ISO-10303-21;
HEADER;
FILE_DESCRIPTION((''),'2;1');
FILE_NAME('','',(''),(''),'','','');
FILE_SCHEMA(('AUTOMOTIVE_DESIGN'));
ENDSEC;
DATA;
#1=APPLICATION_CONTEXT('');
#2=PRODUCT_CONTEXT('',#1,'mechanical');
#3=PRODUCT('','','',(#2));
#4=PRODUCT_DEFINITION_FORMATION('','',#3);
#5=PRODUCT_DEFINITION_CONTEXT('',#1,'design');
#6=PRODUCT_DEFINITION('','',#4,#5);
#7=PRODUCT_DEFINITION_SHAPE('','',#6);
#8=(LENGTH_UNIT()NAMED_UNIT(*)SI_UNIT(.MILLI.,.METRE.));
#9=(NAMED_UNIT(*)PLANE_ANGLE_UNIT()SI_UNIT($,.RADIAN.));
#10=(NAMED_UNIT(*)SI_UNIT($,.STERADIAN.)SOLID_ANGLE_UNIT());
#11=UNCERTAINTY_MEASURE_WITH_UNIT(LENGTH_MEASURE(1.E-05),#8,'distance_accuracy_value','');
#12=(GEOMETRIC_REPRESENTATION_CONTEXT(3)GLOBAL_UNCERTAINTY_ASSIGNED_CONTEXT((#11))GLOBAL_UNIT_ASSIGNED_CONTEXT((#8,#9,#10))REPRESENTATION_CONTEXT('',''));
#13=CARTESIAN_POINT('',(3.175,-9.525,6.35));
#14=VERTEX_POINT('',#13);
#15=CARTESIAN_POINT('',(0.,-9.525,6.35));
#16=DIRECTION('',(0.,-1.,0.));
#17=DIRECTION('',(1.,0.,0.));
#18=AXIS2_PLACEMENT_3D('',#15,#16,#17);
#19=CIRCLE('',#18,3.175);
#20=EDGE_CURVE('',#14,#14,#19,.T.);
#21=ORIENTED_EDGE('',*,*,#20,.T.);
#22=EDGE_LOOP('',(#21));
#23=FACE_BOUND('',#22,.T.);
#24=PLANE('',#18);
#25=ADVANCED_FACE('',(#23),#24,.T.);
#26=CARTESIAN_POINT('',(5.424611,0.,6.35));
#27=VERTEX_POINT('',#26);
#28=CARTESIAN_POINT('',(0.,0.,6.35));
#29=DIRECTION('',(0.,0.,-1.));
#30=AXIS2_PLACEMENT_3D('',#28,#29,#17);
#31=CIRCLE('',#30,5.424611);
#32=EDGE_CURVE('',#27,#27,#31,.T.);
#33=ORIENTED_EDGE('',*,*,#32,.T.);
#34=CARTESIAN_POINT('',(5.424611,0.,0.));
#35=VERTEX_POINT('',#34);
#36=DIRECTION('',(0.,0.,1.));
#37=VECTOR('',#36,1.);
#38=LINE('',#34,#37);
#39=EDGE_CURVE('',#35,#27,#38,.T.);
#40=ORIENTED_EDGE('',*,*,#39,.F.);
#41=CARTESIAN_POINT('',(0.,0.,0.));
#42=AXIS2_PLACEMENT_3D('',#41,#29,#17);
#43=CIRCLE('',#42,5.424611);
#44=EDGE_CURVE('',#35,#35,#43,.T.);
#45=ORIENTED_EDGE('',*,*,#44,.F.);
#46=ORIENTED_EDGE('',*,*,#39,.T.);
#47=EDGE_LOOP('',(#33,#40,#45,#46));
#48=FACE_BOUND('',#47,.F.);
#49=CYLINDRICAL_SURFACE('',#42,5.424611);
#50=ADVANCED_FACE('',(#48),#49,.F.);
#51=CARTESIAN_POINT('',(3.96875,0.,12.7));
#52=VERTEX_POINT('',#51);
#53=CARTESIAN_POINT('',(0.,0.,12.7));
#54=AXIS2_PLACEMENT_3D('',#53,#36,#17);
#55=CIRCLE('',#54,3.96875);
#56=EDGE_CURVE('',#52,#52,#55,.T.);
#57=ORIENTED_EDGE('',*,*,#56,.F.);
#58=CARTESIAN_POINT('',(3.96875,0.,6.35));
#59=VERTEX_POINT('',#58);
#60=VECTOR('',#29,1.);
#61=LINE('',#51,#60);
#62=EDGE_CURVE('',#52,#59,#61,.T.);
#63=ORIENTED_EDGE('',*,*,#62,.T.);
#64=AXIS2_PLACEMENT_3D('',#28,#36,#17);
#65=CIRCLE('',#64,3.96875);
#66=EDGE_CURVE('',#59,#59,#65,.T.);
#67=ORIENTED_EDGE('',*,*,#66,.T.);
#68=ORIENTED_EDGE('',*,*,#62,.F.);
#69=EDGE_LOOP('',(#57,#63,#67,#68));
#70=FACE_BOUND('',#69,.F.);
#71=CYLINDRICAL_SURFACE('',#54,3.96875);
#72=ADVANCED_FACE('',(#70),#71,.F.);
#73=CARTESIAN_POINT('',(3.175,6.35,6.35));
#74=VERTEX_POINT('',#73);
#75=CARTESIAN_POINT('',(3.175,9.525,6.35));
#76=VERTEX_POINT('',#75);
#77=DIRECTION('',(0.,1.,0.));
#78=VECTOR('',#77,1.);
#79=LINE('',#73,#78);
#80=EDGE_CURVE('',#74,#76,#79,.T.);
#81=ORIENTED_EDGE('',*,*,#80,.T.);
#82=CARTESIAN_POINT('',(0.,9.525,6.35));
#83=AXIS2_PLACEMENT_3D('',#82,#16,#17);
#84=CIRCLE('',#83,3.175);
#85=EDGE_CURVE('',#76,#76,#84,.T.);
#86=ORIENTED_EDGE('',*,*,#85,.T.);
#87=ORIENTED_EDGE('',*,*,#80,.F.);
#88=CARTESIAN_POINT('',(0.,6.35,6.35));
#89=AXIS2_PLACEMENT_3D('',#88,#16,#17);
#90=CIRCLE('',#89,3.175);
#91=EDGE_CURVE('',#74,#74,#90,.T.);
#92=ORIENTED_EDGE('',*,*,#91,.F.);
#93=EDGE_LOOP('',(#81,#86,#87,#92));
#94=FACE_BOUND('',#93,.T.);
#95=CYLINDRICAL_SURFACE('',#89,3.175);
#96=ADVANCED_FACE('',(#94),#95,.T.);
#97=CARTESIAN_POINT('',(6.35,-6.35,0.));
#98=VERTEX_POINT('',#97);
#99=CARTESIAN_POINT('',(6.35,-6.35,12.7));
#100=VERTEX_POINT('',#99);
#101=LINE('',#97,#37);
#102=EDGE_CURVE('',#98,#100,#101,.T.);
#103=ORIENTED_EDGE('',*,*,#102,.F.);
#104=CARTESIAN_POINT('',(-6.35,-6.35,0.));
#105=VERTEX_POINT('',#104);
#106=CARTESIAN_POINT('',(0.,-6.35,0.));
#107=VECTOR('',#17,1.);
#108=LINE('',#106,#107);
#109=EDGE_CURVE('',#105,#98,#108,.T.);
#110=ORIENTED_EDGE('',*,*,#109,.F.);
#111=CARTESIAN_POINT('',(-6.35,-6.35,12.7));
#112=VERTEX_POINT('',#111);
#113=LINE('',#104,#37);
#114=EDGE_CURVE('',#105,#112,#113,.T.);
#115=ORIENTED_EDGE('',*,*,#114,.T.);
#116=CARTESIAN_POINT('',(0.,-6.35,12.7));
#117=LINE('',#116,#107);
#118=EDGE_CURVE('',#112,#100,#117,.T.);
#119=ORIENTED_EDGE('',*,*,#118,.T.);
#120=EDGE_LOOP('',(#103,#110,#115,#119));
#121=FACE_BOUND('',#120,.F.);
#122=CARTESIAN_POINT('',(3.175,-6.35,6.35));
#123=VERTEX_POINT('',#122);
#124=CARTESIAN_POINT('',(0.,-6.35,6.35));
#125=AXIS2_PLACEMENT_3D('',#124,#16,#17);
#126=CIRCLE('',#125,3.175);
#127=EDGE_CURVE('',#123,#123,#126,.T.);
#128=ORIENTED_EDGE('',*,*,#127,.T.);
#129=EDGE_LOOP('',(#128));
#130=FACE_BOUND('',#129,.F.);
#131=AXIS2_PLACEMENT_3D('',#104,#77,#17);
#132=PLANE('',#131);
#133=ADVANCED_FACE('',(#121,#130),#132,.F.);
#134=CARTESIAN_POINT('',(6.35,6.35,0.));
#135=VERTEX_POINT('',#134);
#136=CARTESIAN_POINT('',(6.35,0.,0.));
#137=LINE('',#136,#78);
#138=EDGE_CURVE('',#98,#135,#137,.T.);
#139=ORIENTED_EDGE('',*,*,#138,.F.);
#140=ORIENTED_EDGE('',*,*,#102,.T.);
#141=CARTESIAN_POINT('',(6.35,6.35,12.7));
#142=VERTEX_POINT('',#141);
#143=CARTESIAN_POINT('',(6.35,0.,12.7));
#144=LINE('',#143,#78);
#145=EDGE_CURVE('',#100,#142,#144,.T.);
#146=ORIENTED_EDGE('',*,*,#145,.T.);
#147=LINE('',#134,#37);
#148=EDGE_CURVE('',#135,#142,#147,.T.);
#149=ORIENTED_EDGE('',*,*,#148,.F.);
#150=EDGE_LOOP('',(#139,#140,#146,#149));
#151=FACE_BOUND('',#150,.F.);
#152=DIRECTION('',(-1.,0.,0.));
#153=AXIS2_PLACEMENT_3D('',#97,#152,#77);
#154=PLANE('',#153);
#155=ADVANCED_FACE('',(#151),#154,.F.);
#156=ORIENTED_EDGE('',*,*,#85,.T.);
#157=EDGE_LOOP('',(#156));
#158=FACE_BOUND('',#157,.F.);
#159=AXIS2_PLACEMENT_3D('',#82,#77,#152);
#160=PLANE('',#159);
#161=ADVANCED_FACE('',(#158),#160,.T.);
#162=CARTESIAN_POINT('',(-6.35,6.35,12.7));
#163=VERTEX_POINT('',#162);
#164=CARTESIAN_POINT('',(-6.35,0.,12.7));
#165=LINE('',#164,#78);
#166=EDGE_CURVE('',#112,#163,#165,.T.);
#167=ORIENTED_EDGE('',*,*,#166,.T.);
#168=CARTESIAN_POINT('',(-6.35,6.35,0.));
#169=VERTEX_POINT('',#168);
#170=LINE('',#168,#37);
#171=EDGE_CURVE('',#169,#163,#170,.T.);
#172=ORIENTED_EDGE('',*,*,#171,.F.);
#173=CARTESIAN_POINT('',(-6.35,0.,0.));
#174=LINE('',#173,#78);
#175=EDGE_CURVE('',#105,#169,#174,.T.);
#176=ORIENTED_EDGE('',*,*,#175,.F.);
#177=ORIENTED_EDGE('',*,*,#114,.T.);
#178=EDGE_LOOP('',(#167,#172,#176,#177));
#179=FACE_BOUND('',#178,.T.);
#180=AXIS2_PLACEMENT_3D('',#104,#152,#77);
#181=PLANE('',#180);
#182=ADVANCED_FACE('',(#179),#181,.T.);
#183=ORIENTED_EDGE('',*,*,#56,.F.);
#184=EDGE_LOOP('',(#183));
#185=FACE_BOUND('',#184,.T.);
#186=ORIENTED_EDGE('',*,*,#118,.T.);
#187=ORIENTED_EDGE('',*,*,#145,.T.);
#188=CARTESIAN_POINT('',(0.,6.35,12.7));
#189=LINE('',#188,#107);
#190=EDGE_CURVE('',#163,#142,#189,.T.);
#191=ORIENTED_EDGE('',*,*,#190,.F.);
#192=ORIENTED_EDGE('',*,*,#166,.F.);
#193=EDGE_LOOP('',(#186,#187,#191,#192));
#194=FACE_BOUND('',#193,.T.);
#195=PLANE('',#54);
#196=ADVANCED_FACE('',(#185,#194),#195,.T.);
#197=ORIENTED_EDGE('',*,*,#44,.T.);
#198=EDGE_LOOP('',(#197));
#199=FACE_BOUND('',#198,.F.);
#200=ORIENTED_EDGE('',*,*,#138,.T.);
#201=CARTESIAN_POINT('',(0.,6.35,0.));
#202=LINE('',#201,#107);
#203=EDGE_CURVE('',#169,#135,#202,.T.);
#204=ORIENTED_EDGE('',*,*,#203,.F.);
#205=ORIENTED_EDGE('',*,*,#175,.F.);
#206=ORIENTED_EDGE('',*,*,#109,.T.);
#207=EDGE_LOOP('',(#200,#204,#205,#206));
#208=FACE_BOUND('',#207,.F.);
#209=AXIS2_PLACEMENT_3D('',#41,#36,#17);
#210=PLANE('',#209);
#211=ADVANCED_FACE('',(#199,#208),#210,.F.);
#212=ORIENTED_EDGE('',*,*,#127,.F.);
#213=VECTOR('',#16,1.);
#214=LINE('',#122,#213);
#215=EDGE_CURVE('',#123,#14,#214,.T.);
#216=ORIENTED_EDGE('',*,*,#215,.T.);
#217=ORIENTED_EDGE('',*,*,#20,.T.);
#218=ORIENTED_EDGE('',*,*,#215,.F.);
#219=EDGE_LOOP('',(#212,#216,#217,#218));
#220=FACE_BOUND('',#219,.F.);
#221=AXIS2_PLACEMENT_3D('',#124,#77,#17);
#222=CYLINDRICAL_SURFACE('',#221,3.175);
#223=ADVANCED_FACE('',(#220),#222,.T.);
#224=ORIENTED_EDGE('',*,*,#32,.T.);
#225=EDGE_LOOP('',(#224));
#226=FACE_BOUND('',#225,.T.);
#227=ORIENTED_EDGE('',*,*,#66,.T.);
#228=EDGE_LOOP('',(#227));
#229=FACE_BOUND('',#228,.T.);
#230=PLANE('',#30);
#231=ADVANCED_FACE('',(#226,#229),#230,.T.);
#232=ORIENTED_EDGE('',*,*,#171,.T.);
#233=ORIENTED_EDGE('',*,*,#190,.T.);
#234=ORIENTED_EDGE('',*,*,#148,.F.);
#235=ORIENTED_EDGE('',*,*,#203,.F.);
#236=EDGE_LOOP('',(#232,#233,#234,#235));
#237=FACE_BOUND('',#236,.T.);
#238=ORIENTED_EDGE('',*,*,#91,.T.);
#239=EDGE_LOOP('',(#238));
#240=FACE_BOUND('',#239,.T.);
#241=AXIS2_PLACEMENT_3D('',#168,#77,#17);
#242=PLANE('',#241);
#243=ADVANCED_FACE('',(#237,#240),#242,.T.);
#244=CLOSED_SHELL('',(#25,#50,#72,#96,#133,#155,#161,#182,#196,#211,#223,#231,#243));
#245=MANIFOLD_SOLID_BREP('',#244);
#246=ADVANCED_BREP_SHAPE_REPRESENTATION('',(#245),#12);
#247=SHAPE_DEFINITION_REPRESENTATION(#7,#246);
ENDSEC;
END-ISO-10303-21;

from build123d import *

# Parameters (mm, degrees)
F0_W     = 12.7
F0_H     = 12.7
F1_DEPTH = 12.7
F2_R     = 3.96875
F3_DEPTH = 12.7
F4_R     = 5.4246105656
F5_DEPTH = 6.35
F6_R     = 3.175
F7_DEPTH = 3.175


# Not quite as in the source:
# - a pattern or mirror of a feature is missing from the dataset's text; its kind, count and spacing are read off the source's solid


with BuildPart() as f1:
    # F0 (on Top) → F1 (new body)
    with BuildSketch(Plane.XY):
        Rectangle(F0_W, F0_H)
    extrude(amount=F1_DEPTH)

    # F2 (on face) → F3 (cut, through all)
    with BuildSketch(Plane.XY.offset(12.7)):
        Circle(F2_R)
    extrude(amount=-F3_DEPTH, mode=Mode.SUBTRACT)

    # F4 (on face) → F5 (cut)
    with BuildSketch(Plane(origin=(0, 0, 0), x_dir=(1, 0, 0), z_dir=(0, 0, -1))):
        Circle(F4_R)
    extrude(amount=-F5_DEPTH, mode=Mode.SUBTRACT)

    # F6 (on face) → F7 (join)
    with BuildSketch(Plane.XZ.offset(6.35)):
        with Locations((0, 6.35)):
            Circle(F6_R)
    f7 = extrude(amount=F7_DEPTH)

    # F7_copies: F7 across plane
    add(f7.mirror(Plane.ZX))


solid = f1.part
